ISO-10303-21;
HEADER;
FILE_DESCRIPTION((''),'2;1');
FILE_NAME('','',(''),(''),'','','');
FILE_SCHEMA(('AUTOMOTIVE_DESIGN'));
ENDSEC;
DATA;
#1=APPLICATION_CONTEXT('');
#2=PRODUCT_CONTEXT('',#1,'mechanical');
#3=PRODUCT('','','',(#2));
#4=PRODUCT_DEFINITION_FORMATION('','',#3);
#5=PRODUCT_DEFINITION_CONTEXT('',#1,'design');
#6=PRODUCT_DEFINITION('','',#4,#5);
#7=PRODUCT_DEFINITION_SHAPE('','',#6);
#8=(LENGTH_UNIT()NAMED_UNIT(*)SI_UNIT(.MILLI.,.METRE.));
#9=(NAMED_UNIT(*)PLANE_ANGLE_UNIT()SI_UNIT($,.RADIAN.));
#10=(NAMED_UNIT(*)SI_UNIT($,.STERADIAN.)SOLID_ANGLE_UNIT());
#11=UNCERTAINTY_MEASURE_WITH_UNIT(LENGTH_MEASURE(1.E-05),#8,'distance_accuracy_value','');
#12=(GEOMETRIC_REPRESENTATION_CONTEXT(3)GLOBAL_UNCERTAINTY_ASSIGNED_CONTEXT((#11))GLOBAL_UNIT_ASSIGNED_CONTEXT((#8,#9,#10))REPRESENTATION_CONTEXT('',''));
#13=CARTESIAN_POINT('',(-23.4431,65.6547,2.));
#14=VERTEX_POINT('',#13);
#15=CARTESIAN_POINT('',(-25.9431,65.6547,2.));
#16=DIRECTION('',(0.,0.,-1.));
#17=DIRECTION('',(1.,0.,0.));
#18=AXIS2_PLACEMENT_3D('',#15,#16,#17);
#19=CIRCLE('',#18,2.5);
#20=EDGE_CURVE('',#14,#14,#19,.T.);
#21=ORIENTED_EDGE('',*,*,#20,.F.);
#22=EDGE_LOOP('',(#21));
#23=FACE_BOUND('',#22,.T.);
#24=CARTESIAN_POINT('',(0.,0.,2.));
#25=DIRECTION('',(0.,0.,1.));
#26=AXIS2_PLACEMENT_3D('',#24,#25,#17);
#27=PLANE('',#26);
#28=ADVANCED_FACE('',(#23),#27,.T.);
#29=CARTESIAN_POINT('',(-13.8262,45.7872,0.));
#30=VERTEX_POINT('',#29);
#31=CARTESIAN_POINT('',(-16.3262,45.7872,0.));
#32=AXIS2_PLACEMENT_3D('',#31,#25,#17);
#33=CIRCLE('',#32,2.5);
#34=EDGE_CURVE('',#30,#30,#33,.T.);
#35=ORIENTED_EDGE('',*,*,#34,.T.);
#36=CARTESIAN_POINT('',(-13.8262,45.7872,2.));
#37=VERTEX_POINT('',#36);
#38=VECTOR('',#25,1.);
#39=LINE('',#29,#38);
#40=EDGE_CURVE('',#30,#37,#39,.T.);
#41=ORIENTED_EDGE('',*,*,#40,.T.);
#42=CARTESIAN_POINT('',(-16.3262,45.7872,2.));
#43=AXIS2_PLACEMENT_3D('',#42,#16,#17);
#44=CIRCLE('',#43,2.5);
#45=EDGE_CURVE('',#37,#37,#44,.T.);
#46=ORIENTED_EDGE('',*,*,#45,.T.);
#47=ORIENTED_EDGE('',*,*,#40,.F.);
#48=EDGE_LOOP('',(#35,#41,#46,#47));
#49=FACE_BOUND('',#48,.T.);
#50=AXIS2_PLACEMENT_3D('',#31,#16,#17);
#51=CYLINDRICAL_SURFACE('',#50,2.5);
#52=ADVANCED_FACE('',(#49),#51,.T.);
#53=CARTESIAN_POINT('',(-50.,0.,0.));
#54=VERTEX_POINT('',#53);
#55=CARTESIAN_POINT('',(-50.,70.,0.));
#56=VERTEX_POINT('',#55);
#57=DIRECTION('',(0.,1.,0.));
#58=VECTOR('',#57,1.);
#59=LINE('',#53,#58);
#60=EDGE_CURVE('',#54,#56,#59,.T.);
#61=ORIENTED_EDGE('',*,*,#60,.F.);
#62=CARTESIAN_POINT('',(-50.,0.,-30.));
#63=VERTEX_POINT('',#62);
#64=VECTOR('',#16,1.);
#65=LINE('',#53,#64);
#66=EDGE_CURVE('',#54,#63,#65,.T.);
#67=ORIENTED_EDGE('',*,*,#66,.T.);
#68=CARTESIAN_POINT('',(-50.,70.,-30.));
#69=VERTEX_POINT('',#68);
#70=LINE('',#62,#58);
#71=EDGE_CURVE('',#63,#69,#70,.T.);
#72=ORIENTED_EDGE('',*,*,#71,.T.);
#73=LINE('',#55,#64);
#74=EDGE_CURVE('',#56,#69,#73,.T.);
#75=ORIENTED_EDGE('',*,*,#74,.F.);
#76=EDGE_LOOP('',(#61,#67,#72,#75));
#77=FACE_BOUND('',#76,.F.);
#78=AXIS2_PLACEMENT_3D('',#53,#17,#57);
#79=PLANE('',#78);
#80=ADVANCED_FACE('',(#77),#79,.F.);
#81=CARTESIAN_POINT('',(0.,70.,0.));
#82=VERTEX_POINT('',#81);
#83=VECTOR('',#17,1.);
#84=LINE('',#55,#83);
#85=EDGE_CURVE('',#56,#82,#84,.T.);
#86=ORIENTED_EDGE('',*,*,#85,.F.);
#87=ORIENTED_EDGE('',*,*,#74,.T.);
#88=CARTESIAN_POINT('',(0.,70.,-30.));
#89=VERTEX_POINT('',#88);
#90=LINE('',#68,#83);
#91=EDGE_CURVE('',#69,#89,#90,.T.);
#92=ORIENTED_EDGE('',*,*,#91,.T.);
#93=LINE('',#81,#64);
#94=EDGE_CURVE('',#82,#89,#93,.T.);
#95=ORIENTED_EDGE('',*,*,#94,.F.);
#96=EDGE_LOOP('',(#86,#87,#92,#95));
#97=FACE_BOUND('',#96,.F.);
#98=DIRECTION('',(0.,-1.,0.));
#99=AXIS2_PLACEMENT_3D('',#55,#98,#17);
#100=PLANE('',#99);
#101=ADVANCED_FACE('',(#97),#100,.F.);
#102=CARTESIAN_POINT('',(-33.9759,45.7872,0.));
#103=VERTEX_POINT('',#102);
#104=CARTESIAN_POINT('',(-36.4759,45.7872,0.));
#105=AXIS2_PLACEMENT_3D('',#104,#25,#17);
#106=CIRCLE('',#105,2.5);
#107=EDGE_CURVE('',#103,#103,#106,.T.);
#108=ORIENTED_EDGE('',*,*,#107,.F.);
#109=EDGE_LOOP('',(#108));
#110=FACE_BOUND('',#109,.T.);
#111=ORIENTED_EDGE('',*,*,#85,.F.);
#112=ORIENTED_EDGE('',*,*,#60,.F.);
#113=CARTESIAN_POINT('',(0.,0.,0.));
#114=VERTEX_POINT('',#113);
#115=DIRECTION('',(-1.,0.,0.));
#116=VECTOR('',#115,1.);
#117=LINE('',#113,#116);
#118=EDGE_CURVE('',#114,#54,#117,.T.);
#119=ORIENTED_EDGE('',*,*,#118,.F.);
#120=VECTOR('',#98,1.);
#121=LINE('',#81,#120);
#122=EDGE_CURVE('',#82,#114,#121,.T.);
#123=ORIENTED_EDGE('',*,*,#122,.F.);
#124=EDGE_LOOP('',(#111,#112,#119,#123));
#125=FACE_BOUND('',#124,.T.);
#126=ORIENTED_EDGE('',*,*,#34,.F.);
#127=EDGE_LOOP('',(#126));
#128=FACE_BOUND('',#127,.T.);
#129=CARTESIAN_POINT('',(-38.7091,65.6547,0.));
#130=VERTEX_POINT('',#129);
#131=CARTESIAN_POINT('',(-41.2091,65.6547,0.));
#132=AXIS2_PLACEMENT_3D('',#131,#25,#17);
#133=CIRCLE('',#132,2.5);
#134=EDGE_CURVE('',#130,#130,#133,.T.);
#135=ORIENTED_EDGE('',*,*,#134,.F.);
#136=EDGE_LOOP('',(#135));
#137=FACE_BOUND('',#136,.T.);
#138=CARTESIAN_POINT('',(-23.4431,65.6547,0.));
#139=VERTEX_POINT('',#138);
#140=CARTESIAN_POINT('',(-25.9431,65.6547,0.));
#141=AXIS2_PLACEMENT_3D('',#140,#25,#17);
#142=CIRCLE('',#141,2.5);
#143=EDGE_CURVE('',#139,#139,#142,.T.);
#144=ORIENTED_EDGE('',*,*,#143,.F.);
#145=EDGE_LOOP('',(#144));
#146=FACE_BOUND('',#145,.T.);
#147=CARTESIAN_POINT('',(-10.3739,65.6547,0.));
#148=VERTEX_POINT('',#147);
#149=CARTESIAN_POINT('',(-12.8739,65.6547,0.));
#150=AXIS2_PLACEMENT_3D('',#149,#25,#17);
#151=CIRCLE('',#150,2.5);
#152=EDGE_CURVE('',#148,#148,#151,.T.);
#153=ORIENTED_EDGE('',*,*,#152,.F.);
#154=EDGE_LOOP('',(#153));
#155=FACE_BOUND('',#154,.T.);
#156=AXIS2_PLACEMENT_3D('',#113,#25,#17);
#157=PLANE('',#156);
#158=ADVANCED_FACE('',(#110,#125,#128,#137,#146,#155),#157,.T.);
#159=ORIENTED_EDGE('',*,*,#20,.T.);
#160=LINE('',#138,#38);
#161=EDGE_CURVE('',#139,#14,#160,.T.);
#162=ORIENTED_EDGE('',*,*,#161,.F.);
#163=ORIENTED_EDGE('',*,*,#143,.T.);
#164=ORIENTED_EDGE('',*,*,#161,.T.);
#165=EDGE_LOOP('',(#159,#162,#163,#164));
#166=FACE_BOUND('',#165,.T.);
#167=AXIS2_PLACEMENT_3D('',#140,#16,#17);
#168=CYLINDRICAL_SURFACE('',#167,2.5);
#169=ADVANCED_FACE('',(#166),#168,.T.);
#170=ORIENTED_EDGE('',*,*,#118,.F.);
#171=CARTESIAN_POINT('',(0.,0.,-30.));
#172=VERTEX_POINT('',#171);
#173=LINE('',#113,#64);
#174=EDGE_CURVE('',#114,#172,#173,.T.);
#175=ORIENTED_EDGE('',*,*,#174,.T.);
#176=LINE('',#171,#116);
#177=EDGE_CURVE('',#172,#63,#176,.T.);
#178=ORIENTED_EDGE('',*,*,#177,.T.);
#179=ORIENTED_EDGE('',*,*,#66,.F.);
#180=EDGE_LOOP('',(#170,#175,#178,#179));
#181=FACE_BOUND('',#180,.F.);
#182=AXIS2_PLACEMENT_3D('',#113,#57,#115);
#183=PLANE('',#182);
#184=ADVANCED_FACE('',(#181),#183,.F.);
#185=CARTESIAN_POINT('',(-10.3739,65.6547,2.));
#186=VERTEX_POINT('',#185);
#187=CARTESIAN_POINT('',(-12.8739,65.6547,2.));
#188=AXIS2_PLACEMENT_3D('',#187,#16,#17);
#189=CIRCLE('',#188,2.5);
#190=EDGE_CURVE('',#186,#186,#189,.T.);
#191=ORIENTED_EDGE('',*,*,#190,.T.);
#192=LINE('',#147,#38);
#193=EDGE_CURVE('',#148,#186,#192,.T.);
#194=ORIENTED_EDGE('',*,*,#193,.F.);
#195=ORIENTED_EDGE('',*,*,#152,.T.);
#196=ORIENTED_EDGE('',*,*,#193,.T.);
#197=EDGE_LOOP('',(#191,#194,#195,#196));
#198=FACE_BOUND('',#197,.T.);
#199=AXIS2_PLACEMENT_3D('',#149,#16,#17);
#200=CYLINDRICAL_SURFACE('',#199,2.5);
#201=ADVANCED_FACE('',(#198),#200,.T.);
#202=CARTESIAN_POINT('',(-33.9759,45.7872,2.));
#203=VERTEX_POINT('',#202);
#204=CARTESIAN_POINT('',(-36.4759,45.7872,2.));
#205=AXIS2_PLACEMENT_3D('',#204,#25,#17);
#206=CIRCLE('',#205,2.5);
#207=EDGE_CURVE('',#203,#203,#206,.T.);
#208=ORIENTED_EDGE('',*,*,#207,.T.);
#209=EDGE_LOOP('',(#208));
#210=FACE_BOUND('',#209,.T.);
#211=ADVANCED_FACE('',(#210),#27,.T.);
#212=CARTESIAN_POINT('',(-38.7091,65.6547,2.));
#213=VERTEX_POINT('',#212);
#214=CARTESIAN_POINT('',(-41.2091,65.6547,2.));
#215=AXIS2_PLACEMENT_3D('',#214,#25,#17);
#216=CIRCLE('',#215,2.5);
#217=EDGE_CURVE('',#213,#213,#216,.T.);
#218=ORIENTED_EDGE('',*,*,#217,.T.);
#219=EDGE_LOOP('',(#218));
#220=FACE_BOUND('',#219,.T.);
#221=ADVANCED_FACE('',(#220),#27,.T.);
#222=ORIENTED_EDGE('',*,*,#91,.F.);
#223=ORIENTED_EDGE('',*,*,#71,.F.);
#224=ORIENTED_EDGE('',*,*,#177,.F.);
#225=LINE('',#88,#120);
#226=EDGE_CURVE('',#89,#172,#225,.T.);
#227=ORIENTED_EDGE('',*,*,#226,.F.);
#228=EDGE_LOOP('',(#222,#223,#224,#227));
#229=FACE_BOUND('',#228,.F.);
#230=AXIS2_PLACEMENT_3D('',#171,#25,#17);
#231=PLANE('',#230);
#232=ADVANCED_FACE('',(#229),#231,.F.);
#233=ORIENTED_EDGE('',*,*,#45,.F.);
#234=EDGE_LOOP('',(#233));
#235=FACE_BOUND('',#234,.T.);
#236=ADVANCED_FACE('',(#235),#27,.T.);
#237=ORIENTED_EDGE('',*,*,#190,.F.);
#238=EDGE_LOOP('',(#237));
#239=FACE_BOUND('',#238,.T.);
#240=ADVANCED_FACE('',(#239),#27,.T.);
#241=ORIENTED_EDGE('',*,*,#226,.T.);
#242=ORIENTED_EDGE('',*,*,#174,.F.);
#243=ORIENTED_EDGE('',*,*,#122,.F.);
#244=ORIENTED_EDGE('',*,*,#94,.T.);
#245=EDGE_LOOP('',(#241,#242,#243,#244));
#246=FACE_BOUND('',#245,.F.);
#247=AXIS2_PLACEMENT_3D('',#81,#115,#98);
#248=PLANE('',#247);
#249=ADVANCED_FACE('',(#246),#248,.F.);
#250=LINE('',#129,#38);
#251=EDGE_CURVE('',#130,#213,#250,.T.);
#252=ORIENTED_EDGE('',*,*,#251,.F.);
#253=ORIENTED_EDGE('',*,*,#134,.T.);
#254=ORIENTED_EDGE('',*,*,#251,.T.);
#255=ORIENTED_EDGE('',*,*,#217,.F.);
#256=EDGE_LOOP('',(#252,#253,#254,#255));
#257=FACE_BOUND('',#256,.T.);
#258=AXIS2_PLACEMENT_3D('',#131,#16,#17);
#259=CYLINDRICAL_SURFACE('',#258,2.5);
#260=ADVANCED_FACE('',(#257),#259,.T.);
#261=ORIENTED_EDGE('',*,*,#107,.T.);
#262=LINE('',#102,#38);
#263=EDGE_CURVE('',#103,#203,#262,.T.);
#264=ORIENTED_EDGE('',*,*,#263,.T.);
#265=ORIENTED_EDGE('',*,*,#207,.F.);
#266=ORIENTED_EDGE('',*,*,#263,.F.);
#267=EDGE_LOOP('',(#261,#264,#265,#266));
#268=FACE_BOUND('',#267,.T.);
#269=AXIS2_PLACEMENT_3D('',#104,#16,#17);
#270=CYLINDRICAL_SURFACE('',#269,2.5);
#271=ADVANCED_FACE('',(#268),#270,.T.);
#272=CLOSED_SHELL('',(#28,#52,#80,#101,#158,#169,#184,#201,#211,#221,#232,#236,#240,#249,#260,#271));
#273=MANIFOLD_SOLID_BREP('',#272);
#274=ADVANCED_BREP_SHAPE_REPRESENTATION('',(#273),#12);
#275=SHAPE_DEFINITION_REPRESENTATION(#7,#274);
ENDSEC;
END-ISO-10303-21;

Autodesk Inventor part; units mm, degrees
ref_plane "YZ Plane" through (0, 0, 0) normal (1, 0, 0) x (0, 1, 0)
ref_plane "XZ Plane" through (0, 0, 0) normal (0, 1, 0) x (-1, 0, 0)
ref_plane "XY Plane" through (0, 0, 0) normal (0, 0, 1) x (1, 0, 0)
sketch "Sketch1" plane through (0, 0, 0) normal (0, 0, 1) x (1, 0, 0)
  line L0 (0, 0) -> (-50, 0)
  line L1 (-50, 0) -> (-50, 70)
  line L2 (-50, 70) -> (0, 70)
  line L3 (0, 70) -> (0, 0)
  dimension "d0" = 50
  dimension "d1" = 70
extrude "Extrusion1" add sketch "Sketch1" against normal blind 30
sketch "Sketch2" plane through (0, 0, 0) normal (0, 0, 1) x (1, 0, 0)
  circle A0 centre (-41.2091, 65.6547) radius 2.5
  line L0 (-41.2091, 65.6547) -> (-12.3103, 65.6547)
  circle A1 centre (-25.9431, 65.6547) radius 2.5
  circle A2 centre (-12.8739, 65.6547) radius 2.5
  circle A3 centre (-36.4759, 45.7872) radius 2.5
  line L1 (-36.4759, 45.7872) -> (-11.1478, 45.7872)
  circle A4 centre (-16.3262, 45.7872) radius 2.5
  point P0 (0, 0)
  dimension "d4" = 5
  dimension "d5" = 5
  dimension "d6" = 5
  dimension "d7" = 5
  dimension "d8" = 5
extrude "Extrusion2" add sketch "Sketch2" along normal blind 2
properties part number "subsystem1"
